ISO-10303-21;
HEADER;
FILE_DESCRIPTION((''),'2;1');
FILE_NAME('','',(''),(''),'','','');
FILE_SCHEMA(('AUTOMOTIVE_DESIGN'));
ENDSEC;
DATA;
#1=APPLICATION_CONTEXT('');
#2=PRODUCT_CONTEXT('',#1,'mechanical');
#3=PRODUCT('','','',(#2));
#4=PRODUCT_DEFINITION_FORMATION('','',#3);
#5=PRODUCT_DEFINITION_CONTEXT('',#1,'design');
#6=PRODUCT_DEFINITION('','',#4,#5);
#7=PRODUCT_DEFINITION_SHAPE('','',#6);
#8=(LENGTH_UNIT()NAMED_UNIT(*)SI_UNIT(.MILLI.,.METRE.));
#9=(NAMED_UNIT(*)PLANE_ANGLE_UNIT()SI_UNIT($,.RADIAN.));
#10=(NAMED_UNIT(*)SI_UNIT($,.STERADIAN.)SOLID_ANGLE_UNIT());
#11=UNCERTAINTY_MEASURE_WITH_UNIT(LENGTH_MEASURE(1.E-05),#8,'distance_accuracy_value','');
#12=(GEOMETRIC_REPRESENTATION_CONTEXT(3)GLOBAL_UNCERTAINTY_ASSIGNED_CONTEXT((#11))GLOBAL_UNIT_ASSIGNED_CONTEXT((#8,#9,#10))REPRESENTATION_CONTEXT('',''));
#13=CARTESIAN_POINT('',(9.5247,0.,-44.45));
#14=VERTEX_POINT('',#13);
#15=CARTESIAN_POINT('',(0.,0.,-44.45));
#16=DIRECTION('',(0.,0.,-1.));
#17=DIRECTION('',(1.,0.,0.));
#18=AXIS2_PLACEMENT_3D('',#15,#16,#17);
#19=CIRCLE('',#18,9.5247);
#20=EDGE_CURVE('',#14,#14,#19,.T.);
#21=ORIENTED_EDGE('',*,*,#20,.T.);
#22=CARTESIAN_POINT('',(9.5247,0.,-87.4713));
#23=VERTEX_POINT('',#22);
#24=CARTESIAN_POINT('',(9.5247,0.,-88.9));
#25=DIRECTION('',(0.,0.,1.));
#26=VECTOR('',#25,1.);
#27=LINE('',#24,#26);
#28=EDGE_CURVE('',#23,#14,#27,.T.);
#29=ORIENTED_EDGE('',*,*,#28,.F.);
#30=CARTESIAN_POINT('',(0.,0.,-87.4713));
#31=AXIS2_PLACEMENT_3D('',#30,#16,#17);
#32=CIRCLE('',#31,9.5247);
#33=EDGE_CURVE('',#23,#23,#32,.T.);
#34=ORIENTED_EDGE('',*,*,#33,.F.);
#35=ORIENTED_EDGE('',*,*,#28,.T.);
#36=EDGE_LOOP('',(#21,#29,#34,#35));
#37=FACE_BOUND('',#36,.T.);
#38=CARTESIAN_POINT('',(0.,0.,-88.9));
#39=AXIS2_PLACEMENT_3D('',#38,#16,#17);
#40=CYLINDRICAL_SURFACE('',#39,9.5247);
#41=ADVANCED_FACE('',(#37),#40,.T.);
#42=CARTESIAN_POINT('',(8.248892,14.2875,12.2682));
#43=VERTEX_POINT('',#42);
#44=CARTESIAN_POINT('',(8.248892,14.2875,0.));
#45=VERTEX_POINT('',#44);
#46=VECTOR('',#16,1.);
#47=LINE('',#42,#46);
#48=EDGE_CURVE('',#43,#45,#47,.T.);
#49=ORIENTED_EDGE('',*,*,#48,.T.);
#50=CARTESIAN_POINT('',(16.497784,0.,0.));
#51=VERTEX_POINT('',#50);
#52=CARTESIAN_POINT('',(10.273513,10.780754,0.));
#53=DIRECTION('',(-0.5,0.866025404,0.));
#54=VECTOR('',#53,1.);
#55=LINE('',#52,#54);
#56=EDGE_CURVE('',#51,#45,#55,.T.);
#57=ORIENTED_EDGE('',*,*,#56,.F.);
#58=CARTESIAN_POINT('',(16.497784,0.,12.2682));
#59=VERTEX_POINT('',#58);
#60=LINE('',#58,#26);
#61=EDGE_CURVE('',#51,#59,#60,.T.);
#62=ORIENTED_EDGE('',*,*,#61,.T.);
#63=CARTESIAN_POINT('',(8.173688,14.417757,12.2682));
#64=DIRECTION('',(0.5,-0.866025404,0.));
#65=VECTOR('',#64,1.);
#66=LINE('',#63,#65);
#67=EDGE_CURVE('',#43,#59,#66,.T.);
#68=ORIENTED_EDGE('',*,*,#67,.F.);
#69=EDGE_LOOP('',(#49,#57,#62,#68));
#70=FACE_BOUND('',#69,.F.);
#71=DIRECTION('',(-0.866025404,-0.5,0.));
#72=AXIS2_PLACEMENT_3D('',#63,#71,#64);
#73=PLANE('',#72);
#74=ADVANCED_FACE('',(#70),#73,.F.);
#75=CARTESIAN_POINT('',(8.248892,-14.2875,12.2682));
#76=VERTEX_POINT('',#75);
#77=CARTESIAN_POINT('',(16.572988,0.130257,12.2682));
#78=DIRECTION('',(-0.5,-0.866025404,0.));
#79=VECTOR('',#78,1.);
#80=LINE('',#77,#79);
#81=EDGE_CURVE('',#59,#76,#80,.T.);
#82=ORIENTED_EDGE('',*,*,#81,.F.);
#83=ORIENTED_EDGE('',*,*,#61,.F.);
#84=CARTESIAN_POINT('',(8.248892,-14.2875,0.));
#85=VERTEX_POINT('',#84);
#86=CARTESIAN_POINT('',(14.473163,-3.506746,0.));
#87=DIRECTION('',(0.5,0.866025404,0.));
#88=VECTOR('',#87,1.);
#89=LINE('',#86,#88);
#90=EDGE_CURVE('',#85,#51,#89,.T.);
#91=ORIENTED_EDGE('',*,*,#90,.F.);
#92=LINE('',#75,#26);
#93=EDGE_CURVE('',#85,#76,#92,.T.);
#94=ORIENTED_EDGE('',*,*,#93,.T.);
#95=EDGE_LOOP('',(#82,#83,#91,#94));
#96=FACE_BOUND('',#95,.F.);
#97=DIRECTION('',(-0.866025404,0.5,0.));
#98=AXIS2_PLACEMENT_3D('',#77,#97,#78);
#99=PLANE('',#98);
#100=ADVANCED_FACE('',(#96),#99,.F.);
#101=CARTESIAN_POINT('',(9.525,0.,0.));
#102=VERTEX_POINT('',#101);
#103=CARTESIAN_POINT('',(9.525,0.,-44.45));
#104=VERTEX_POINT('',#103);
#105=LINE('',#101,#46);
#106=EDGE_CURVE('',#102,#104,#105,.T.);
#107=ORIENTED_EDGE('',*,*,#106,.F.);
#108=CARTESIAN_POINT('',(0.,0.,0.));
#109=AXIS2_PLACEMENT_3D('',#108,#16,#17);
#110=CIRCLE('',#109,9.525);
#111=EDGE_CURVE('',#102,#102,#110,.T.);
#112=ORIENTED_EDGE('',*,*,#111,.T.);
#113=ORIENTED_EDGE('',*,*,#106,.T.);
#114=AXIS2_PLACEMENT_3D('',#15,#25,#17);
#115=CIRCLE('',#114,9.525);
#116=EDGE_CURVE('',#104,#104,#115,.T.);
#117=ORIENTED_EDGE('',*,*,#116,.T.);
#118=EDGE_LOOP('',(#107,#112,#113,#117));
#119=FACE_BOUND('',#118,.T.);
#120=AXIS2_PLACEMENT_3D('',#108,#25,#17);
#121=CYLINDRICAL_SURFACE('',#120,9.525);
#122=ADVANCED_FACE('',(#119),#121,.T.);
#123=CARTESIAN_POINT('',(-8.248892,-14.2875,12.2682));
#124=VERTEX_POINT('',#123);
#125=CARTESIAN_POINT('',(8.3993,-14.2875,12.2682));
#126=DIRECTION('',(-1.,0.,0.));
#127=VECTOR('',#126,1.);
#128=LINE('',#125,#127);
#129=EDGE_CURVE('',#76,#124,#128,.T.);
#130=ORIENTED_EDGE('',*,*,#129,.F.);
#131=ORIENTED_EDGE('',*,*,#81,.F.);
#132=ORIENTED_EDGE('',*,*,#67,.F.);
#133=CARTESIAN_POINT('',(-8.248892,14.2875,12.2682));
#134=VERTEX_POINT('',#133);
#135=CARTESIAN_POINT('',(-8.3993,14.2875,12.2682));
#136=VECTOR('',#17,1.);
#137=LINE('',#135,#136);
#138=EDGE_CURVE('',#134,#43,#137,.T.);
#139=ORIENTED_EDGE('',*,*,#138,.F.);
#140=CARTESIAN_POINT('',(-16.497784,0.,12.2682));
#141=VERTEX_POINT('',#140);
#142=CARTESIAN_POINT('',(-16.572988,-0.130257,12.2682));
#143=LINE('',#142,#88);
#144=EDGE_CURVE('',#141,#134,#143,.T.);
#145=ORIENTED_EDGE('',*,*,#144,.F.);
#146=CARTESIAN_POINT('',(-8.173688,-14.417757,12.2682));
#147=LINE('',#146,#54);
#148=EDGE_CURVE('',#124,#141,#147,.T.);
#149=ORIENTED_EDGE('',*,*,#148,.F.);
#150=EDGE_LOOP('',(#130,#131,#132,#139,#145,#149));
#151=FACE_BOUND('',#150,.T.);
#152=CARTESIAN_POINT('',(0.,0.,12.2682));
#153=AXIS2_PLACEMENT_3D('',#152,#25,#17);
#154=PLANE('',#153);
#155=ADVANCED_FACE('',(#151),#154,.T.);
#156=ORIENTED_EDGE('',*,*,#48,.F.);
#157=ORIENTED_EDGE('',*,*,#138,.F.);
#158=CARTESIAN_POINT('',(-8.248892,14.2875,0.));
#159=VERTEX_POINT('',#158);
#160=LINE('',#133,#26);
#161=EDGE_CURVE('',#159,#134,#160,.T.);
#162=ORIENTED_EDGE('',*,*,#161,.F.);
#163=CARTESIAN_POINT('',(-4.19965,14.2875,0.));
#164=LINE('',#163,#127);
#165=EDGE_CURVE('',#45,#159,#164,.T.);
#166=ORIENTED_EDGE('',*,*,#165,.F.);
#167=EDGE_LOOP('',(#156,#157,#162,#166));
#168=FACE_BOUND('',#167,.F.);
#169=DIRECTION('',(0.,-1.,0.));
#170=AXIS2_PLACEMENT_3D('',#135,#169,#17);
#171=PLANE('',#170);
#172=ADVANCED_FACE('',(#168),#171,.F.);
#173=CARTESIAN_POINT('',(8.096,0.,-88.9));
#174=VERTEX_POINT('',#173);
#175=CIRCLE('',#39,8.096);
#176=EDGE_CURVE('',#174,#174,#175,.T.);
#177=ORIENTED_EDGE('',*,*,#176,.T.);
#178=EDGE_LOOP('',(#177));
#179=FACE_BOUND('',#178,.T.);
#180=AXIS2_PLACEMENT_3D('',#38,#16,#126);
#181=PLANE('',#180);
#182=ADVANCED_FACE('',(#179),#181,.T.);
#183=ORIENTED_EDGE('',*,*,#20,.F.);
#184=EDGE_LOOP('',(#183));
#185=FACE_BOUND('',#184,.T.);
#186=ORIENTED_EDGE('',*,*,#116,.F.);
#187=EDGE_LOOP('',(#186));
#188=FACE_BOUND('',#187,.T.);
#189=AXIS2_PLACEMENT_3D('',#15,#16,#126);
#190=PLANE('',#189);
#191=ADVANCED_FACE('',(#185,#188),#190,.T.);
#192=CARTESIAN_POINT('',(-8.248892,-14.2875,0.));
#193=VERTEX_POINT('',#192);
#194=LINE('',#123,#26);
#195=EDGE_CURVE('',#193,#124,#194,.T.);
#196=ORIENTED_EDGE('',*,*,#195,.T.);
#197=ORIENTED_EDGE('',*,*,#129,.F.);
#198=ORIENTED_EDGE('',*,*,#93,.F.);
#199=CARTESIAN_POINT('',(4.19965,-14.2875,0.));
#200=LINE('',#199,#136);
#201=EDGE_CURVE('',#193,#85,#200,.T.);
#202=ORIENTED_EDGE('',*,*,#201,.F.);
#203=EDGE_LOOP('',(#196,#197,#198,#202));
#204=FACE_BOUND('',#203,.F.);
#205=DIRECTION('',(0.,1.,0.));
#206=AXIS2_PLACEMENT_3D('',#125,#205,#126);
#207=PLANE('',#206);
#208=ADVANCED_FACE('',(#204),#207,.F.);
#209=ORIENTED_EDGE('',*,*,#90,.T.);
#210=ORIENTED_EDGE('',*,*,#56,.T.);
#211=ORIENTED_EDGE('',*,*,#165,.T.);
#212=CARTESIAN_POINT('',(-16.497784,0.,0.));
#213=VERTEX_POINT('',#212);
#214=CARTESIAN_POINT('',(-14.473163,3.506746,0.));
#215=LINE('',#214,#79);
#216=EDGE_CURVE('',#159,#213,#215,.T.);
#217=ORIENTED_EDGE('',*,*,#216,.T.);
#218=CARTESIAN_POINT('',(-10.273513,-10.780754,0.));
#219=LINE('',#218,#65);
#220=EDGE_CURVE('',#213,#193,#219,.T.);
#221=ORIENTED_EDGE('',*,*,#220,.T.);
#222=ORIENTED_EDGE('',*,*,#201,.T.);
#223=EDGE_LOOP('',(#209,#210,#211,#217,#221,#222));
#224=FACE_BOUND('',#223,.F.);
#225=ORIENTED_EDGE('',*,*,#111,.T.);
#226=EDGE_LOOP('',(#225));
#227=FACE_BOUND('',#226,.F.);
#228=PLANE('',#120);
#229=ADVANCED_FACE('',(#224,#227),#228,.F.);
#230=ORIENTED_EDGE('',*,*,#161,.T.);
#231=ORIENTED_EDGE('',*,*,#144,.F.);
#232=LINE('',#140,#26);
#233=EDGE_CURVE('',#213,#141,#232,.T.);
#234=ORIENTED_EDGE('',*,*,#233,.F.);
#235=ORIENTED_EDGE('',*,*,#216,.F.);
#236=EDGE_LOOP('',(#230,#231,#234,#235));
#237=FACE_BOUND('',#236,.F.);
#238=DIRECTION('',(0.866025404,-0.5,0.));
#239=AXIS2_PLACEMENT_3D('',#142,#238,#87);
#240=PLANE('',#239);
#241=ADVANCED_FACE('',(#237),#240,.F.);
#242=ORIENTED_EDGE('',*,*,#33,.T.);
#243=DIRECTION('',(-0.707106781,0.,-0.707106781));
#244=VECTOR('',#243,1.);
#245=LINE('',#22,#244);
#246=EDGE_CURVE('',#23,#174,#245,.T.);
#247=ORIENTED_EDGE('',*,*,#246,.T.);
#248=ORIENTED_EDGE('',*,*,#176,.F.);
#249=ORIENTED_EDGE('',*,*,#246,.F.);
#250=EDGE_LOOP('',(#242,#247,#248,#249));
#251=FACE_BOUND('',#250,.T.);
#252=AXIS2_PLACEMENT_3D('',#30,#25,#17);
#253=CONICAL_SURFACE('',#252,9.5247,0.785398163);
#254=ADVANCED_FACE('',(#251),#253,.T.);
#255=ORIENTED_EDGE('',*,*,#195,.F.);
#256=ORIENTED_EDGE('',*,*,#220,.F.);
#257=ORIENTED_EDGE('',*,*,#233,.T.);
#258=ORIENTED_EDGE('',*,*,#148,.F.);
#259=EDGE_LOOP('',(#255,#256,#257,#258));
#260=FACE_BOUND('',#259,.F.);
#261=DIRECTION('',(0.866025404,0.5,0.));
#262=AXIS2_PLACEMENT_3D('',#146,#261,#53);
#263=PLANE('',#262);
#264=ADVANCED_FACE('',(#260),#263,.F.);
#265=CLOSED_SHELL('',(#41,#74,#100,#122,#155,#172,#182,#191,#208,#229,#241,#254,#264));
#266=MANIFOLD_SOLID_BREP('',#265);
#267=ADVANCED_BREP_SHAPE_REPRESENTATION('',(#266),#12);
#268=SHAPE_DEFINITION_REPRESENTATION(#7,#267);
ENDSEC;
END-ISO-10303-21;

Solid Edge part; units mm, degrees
sketch "Sketch1" plane through (0, 0, 0) normal (0, 0, 1) x (1, 0, 0)
  circle A0 centre (0, 0) radius 16.5735
  dimension "D1" = 33.147
extrude "Protrusion1" add sketch "Sketch1" along normal blind 12.2682
sketch "Sketch2" plane through (0, 0, 0) normal (0, 0, -1) x (1, 0, 0)
  circle A0 centre (0, 0) radius 9.525
extrude "Protrusion2" add sketch "Sketch2" along normal blind 88.9
sketch "Sketch3" plane through (0, 0, -88.9) normal (0, 0, -1) x (1, 0, 0)
  circle A0 centre (0, 0) radius 9.5247
extrude "Cutout1" cut sketch "Sketch3" against normal blind 44.45 flip side to cut
chamfer "Chamfer_1" distance 1.4287 angle 45 1 edges at (-9.5247, 0, -88.9)
sketch "Sketch4" plane through (0, 0, 12.2682) normal (0, 0, 1) x (1, 0, 0)
  line L0 (-8.3993, 14.2875) -> (8.3993, 14.2875)
  dimension "D1" = 28.575
extrude "Cutout2" cut sketch "Sketch4" against normal up to next material side at (0, 14.3375, 12.2682)
pattern_circular "Pattern1" count 6 over 360 about axis through (0, 0, 12.2682) along (0, 0, 1) of "Cutout2"
properties part number "118372"
